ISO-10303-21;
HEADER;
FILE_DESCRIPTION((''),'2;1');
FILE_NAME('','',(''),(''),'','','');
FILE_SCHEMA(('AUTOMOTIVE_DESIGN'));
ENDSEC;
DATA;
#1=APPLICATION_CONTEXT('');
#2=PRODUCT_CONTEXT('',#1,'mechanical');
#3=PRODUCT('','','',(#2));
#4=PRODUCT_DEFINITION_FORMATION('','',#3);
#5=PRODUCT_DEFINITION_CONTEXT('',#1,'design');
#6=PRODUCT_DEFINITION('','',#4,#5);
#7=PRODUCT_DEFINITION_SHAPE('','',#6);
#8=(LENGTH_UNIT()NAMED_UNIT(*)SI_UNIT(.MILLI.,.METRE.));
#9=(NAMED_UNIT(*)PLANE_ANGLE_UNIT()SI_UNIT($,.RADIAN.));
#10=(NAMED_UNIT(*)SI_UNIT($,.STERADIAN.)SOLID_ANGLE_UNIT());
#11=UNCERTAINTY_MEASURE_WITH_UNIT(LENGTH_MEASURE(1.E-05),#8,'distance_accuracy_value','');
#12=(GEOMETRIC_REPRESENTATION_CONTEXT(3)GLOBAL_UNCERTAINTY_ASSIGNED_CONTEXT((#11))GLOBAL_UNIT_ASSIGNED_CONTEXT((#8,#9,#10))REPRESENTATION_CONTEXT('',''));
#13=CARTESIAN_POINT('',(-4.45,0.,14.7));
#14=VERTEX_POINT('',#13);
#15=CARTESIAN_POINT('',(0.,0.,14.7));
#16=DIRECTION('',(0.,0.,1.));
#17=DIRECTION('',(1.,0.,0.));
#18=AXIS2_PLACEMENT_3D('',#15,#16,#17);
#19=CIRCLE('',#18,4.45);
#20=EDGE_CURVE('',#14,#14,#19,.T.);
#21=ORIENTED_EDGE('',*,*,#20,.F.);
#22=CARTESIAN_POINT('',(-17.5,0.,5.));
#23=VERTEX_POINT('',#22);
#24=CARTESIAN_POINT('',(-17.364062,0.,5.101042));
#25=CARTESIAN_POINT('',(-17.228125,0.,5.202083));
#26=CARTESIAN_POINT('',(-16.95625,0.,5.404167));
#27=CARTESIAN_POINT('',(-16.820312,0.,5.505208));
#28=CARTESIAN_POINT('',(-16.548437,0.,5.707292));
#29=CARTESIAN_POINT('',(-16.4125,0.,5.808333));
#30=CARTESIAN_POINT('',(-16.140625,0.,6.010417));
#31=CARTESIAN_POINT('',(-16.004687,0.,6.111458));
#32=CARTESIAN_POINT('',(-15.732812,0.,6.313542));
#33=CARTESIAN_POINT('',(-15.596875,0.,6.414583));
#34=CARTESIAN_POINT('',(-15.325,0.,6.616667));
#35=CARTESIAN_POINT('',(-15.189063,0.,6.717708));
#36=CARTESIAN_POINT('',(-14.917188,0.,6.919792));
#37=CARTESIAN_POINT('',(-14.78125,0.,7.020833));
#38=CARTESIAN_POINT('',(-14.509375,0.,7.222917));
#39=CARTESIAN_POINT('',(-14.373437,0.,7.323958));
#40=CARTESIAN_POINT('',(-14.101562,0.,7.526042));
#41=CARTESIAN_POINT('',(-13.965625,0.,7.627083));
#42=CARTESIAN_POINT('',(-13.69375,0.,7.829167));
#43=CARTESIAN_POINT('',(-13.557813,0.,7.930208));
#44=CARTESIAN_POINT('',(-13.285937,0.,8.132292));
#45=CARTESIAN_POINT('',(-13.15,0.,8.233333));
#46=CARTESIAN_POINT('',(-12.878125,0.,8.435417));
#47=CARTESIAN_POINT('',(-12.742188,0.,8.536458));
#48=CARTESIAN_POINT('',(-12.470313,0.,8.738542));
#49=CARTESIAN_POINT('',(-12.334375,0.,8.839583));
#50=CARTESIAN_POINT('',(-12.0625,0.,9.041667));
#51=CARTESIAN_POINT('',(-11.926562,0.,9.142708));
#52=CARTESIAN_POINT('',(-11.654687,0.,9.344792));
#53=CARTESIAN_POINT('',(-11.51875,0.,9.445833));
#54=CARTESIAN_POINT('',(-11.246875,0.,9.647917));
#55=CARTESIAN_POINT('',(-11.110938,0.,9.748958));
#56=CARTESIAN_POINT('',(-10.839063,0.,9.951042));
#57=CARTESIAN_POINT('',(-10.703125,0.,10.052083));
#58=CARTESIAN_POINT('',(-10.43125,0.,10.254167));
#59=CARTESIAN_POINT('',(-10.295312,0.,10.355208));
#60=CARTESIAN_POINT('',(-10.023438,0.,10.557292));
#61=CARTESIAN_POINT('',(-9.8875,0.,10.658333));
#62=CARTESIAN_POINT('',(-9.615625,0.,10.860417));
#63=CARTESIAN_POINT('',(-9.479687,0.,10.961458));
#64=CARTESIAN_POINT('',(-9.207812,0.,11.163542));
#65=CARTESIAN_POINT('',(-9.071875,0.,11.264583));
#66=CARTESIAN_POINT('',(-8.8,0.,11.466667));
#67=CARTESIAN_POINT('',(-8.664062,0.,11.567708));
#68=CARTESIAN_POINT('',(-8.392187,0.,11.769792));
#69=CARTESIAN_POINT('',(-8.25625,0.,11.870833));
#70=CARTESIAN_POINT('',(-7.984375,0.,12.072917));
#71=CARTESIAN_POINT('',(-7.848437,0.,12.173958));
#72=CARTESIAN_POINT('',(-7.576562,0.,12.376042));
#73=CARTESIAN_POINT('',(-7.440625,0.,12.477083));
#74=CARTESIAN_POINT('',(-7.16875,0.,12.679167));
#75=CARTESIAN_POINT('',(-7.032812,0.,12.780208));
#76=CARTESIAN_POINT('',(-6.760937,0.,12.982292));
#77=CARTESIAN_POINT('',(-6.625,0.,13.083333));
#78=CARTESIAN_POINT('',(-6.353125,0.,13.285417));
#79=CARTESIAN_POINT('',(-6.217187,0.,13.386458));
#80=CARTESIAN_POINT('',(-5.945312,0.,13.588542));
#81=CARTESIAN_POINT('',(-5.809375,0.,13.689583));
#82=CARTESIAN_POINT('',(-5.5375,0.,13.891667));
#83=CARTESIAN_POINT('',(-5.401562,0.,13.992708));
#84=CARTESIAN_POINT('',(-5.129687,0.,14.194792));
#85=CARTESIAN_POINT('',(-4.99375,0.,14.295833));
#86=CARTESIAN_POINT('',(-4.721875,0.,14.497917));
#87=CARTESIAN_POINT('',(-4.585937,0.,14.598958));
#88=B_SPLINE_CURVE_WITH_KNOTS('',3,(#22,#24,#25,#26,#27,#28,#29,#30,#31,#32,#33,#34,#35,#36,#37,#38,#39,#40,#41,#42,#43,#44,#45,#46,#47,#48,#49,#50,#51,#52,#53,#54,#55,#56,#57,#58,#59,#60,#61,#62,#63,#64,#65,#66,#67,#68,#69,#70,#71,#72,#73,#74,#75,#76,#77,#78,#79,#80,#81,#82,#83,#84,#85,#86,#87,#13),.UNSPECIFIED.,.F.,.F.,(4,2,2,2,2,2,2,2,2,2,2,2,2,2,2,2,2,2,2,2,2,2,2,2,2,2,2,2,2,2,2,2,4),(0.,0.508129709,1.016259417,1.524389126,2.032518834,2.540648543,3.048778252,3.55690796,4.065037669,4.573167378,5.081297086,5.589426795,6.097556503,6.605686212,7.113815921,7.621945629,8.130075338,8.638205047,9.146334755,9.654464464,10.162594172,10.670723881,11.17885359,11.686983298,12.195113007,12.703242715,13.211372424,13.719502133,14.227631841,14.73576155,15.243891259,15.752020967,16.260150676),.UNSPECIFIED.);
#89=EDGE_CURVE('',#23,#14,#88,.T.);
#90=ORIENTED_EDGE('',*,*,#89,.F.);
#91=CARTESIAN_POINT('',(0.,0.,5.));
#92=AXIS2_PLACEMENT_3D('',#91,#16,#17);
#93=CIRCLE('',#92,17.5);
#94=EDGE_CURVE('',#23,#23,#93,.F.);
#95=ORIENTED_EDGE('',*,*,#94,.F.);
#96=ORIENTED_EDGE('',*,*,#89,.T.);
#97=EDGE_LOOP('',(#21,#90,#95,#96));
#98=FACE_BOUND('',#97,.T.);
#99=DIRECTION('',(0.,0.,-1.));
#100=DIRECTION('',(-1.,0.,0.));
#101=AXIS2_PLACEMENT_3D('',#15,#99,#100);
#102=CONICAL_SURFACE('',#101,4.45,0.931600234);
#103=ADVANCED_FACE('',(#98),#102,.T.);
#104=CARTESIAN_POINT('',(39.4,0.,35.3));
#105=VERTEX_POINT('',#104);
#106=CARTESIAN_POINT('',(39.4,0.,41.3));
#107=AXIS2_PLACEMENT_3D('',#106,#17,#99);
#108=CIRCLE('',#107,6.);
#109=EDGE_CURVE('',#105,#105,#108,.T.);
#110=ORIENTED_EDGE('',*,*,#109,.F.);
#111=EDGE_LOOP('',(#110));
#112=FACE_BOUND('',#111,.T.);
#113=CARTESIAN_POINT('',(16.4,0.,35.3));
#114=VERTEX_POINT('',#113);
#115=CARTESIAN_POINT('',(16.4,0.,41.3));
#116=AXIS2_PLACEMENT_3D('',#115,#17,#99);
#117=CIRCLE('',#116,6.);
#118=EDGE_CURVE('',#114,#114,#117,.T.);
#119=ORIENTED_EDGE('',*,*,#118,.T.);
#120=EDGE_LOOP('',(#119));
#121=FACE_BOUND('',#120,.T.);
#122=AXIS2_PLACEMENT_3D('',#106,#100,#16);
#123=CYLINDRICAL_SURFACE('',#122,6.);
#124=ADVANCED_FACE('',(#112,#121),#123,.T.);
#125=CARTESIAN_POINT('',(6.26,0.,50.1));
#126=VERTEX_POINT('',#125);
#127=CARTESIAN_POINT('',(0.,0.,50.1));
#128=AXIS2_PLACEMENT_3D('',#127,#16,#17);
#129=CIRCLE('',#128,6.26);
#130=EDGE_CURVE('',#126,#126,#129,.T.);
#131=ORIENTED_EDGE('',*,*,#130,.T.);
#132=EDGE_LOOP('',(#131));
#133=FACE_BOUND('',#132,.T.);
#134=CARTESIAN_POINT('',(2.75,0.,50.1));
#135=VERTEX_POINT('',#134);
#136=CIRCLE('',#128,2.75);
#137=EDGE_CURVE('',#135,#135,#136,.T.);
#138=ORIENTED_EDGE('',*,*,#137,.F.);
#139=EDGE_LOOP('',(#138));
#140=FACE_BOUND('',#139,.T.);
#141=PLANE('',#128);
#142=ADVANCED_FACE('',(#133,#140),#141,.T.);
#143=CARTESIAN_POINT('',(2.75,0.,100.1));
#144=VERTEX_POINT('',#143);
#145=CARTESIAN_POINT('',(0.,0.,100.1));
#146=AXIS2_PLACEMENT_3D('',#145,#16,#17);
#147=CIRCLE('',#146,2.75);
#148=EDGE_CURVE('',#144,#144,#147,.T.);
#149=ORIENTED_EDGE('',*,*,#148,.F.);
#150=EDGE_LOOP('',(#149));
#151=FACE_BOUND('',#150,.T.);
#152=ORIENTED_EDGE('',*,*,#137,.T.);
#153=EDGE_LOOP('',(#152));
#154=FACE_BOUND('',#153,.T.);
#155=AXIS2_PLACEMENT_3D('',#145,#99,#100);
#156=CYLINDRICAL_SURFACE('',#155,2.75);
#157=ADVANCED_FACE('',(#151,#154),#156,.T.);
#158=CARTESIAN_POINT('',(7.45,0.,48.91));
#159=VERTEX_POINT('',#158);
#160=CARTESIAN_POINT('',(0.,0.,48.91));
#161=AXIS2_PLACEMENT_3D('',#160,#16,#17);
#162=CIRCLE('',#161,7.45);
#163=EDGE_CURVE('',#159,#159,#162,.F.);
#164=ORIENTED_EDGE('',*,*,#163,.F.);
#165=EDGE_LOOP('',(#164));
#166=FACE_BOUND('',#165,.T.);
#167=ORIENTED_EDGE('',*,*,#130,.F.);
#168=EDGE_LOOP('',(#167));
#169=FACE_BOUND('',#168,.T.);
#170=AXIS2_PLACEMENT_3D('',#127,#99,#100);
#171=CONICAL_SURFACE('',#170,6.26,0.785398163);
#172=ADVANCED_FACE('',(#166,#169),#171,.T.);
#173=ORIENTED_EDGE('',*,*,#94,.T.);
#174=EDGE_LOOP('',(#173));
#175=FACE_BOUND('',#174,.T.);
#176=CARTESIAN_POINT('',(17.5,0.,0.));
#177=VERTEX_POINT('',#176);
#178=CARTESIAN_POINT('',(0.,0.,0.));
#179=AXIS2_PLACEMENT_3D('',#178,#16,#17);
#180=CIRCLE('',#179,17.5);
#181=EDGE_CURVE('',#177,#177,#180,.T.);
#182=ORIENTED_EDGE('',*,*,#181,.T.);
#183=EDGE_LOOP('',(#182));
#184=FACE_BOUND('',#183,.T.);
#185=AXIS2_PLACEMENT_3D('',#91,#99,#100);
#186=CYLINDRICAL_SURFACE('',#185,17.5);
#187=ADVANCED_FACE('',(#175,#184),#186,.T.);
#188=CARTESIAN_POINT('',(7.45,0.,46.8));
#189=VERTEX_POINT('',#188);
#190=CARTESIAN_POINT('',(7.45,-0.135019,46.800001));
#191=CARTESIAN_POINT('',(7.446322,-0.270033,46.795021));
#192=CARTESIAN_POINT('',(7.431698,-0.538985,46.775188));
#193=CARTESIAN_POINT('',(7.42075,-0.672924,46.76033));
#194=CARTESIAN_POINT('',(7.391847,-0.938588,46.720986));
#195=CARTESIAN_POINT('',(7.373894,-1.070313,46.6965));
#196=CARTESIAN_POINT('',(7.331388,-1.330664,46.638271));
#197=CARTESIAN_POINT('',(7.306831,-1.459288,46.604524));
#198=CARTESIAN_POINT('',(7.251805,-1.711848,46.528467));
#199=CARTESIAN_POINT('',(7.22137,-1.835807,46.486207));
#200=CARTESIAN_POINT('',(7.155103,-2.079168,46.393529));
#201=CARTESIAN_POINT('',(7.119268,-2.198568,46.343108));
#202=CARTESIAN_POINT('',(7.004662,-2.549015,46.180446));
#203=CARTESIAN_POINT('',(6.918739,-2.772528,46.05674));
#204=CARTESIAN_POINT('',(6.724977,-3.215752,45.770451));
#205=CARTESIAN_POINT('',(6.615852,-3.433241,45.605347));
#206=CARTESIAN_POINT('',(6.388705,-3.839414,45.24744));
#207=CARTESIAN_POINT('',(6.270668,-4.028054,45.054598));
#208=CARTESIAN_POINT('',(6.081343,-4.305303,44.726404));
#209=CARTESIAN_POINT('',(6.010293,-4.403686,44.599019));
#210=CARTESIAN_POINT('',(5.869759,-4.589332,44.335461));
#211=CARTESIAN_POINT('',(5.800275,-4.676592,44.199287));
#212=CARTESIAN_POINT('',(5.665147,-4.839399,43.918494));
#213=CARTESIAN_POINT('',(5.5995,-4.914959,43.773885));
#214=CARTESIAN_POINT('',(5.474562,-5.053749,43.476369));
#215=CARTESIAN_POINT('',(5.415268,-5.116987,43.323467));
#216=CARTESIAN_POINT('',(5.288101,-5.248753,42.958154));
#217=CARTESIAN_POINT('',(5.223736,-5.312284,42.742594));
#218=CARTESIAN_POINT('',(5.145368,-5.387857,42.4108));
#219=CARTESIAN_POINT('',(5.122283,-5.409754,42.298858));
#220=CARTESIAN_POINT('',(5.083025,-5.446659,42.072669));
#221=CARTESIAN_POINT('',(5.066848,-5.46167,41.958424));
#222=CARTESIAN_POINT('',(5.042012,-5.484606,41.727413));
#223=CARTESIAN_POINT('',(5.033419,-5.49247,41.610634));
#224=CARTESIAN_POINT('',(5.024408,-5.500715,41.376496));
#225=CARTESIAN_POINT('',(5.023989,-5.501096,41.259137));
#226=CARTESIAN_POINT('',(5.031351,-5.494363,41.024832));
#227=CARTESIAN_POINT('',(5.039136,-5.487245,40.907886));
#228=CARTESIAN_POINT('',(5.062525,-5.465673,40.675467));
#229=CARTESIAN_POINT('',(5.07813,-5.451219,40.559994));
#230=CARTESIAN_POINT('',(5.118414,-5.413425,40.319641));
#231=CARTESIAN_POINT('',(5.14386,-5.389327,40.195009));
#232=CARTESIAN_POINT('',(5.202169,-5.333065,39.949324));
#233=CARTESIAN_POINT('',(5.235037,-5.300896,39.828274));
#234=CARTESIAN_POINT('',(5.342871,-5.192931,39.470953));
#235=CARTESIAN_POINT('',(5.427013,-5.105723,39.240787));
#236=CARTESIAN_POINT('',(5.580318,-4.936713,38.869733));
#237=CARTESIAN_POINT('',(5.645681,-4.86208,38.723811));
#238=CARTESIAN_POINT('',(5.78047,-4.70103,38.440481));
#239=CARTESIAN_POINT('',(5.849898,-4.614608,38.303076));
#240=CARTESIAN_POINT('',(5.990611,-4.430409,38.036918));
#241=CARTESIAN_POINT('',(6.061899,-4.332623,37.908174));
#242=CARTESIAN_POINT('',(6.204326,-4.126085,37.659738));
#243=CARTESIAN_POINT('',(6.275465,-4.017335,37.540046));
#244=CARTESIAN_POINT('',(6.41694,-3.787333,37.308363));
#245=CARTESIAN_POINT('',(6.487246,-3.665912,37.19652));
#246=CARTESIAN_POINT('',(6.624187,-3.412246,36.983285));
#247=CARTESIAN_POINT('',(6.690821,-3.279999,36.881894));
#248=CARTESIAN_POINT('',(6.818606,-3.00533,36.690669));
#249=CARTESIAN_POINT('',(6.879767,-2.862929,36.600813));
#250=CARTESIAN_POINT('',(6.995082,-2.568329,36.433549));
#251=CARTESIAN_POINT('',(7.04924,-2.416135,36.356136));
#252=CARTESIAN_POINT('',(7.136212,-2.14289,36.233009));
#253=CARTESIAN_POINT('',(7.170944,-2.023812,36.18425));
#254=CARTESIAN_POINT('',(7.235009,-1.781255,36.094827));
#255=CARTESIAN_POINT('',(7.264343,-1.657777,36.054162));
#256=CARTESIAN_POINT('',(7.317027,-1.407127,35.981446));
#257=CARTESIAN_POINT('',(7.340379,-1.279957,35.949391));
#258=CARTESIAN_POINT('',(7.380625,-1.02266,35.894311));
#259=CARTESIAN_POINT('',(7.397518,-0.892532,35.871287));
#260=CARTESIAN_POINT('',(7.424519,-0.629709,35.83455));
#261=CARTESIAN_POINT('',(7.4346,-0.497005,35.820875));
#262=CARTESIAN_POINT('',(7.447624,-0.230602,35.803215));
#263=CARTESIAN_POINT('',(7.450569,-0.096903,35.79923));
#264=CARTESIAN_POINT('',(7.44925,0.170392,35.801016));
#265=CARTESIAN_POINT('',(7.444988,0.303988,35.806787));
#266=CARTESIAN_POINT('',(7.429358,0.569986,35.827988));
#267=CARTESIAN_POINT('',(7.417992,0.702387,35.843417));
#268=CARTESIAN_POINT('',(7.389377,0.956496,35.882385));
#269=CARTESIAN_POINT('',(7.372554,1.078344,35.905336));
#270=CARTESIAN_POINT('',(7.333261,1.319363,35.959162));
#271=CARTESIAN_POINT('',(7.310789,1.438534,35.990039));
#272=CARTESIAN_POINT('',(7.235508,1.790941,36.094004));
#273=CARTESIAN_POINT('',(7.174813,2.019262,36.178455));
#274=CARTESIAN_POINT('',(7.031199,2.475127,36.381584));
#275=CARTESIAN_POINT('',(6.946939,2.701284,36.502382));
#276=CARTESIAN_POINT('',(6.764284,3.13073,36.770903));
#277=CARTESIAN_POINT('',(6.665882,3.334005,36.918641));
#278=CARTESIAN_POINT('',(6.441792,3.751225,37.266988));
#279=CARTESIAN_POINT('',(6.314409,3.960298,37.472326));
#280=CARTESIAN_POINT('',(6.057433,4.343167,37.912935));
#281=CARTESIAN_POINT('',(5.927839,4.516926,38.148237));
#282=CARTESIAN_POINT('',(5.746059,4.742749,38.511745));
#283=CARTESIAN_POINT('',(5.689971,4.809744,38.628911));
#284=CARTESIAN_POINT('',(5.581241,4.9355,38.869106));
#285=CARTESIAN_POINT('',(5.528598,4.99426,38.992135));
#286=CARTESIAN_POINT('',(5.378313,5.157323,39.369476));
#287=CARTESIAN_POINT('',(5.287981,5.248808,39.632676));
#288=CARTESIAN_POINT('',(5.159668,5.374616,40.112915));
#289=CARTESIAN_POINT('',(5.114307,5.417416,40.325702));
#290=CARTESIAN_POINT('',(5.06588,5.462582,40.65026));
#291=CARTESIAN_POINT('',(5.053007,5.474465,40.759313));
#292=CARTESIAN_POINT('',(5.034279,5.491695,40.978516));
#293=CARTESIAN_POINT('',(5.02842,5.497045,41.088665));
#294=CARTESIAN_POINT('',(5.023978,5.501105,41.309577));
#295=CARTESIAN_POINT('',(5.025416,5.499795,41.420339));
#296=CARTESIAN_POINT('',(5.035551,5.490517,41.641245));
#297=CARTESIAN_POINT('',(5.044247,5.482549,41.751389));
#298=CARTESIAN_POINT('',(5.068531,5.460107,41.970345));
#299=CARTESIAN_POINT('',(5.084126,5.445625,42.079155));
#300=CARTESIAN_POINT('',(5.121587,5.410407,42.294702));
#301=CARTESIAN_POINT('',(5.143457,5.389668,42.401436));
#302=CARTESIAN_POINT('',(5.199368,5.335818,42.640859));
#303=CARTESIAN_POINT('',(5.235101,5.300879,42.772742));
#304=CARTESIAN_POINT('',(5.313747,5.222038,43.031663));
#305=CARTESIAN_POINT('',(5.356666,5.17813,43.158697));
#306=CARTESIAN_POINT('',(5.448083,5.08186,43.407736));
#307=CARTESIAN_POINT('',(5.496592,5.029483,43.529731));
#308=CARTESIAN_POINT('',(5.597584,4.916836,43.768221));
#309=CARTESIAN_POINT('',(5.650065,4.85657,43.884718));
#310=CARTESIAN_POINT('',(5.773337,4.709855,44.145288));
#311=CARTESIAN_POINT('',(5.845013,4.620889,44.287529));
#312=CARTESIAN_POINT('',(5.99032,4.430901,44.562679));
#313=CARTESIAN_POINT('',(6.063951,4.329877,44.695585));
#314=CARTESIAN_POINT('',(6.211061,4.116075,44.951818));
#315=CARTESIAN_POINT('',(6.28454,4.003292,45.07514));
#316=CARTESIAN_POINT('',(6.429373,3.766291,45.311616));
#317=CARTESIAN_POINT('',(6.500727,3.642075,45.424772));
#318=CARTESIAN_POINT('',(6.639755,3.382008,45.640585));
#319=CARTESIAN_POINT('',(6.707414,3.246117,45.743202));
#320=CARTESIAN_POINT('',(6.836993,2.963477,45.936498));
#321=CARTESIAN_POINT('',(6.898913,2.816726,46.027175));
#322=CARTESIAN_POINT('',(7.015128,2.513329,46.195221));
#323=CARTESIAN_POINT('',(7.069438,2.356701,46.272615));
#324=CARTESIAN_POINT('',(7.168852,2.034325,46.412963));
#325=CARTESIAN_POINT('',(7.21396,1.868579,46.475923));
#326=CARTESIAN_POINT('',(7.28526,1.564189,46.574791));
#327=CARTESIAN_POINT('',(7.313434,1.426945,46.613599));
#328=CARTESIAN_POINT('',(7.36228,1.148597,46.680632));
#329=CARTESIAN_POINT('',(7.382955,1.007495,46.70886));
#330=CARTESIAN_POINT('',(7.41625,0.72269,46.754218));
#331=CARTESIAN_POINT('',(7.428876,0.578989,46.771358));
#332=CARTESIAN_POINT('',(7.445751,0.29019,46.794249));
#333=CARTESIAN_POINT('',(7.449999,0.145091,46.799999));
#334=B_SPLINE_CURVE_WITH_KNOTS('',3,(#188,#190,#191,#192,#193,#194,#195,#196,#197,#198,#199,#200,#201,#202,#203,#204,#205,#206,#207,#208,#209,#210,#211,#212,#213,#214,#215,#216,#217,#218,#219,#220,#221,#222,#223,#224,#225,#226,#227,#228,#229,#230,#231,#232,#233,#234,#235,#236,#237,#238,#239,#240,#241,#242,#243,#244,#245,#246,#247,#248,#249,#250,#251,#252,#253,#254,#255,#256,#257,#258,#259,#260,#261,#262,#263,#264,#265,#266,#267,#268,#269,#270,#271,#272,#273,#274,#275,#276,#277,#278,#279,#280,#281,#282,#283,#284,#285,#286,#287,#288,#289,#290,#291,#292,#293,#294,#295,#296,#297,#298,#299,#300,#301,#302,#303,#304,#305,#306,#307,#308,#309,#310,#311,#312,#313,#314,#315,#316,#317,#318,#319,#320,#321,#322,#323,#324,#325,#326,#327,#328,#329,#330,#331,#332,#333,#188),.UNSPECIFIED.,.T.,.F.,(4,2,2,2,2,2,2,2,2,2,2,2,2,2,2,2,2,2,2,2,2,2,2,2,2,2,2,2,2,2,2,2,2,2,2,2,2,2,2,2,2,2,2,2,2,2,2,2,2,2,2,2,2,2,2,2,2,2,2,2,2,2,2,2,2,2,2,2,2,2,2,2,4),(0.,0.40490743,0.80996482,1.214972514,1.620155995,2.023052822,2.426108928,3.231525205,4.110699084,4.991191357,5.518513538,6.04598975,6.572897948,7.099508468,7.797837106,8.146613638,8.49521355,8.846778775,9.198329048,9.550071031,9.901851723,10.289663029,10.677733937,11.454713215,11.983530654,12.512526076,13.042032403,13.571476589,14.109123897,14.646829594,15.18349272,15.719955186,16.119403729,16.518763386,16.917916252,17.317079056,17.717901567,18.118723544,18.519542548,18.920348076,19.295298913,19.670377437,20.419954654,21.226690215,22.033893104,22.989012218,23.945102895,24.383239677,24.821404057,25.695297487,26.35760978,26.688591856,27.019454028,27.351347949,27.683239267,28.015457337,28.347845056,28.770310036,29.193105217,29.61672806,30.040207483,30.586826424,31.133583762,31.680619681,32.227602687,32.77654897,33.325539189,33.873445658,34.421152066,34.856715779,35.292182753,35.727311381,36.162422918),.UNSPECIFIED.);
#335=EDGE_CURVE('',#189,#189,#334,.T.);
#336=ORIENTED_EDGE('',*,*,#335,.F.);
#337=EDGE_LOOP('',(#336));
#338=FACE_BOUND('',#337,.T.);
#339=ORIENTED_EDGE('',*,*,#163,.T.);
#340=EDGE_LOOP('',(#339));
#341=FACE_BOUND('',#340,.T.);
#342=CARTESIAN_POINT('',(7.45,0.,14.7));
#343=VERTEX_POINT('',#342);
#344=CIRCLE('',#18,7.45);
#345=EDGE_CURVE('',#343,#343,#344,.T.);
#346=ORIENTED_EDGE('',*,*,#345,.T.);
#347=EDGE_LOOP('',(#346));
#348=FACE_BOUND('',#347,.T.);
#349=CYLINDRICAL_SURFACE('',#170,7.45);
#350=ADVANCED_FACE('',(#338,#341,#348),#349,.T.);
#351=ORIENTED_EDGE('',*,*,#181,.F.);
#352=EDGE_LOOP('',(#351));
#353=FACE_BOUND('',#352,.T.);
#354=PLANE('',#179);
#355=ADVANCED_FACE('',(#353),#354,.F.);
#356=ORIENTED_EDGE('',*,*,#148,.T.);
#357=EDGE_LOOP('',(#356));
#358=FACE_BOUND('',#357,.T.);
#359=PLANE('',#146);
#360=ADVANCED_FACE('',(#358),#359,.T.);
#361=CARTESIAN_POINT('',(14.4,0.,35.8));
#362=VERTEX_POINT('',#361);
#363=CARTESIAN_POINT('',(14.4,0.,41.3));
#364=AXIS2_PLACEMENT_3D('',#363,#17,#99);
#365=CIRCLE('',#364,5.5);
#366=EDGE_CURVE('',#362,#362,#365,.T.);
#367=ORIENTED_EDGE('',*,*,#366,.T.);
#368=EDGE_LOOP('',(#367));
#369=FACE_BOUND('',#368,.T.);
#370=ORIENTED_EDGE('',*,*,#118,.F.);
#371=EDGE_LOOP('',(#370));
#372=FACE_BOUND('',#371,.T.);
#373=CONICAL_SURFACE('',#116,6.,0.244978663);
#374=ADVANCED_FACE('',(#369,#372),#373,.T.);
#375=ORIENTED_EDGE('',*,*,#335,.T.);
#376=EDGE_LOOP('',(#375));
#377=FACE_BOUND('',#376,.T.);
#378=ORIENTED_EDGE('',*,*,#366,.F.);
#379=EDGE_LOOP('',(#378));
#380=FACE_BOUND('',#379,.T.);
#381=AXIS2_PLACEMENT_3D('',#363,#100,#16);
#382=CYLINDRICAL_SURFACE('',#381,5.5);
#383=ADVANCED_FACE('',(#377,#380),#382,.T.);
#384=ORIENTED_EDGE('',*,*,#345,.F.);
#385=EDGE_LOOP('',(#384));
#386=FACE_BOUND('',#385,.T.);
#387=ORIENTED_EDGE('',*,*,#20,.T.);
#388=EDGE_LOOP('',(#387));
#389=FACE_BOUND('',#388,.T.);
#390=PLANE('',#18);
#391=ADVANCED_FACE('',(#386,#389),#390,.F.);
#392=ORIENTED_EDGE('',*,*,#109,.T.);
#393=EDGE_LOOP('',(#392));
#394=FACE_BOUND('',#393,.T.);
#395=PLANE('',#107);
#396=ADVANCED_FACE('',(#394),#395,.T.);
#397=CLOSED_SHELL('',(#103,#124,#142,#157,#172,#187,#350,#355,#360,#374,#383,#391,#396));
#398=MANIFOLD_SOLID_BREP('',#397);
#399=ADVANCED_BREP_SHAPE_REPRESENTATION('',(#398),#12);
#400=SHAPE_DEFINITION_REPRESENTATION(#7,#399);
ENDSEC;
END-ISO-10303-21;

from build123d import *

# Parameters (mm, degrees)
ESQUISSE1_R        = 17.5
BOSS_EXTRU_1_DEPTH = 5
ESQUISSE2_R        = 17.5
BOSS_EXTRU_2_DEPTH = 9.7
CHANFREIN1_SIZE    = 9.7
CHANFREIN1_SIZE2   = 13.05
ESQUISSE3_R        = 7.45
BOSS_EXTRU_3_DEPTH = 35.4
ESQUISSE4_R        = 2.75
BOSS_EXTRU_4_DEPTH = 50
ESQUISSE5_R        = 5.5
BOSS_EXTRU_5_DEPTH = 14.4
CHANFREIN2_SIZE    = 1.19
ESQUISSE6_R        = 6
BOSS_EXTRU_6_DEPTH = 25
CHANFREIN3_SIZE2   = 0.5
CHANFREIN3_SIZE    = 2


with BuildPart() as part:
    # Esquisse1 → Boss.-Extru.1 (new body)
    with BuildSketch(Plane.XY):
        Circle(ESQUISSE1_R)
    extrude(amount=BOSS_EXTRU_1_DEPTH)

    # Esquisse2 → Boss.-Extru.2 (add)
    with BuildSketch(Plane.XY.offset(5)):
        Circle(ESQUISSE2_R)
    extrude(amount=BOSS_EXTRU_2_DEPTH)

    # Chanfrein1
    chanfrein1_edges = [part.edges().sort_by_distance(p)[0] for p in [
        (-17.5, 0, 14.7),
    ]]
    chanfrein1_side = [part.faces().sort_by_distance(p)[0] for p in [
        (-17.5, 0, 7.35),
    ]]
    chamfer(chanfrein1_edges, length=CHANFREIN1_SIZE, length2=CHANFREIN1_SIZE2, reference=chanfrein1_side[0])

    # Esquisse3 → Boss.-Extru.3 (add)
    with BuildSketch(Plane.XY.offset(14.7)):
        Circle(ESQUISSE3_R)
    extrude(amount=BOSS_EXTRU_3_DEPTH)

    # Esquisse4 → Boss.-Extru.4 (add)
    with BuildSketch(Plane.XY.offset(50.1)):
        Circle(ESQUISSE4_R)
    extrude(amount=BOSS_EXTRU_4_DEPTH)

    # Esquisse5 → Boss.-Extru.5 (add)
    with BuildSketch(Plane(origin=(0, 0, 0), x_dir=(0, 0, -1), z_dir=(1, 0, 0))):
        with Locations((-41.3, 0)):
            Circle(ESQUISSE5_R)
    extrude(amount=BOSS_EXTRU_5_DEPTH)

    # Chanfrein2
    chanfrein2_edges = [part.edges().sort_by_distance(p)[0] for p in [
        (-7.45, 0, 50.1),
    ]]
    chamfer(chanfrein2_edges, length=CHANFREIN2_SIZE)

    # Esquisse6 → Boss.-Extru.6 (add)
    with BuildSketch(Plane(origin=(14.4, 0, 0), x_dir=(0, 0, -1), z_dir=(1, 0, 0))):
        with Locations((-41.3, 0)):
            Circle(ESQUISSE6_R)
    extrude(amount=BOSS_EXTRU_6_DEPTH)

    # Chanfrein3
    chanfrein3_edges = [part.edges().sort_by_distance(p)[0] for p in [
        (14.4, 0, 47.3),
    ]]
    chanfrein3_side = [part.faces().sort_by_distance(p)[0] for p in [
        (14.41, 0, 47.3),
    ]]
    chamfer(chanfrein3_edges, length=CHANFREIN3_SIZE - 0.0001, length2=CHANFREIN3_SIZE2 - 0.0001, reference=chanfrein3_side[0])  # a hair under: the kernel refuses the full size


solid = part.part
